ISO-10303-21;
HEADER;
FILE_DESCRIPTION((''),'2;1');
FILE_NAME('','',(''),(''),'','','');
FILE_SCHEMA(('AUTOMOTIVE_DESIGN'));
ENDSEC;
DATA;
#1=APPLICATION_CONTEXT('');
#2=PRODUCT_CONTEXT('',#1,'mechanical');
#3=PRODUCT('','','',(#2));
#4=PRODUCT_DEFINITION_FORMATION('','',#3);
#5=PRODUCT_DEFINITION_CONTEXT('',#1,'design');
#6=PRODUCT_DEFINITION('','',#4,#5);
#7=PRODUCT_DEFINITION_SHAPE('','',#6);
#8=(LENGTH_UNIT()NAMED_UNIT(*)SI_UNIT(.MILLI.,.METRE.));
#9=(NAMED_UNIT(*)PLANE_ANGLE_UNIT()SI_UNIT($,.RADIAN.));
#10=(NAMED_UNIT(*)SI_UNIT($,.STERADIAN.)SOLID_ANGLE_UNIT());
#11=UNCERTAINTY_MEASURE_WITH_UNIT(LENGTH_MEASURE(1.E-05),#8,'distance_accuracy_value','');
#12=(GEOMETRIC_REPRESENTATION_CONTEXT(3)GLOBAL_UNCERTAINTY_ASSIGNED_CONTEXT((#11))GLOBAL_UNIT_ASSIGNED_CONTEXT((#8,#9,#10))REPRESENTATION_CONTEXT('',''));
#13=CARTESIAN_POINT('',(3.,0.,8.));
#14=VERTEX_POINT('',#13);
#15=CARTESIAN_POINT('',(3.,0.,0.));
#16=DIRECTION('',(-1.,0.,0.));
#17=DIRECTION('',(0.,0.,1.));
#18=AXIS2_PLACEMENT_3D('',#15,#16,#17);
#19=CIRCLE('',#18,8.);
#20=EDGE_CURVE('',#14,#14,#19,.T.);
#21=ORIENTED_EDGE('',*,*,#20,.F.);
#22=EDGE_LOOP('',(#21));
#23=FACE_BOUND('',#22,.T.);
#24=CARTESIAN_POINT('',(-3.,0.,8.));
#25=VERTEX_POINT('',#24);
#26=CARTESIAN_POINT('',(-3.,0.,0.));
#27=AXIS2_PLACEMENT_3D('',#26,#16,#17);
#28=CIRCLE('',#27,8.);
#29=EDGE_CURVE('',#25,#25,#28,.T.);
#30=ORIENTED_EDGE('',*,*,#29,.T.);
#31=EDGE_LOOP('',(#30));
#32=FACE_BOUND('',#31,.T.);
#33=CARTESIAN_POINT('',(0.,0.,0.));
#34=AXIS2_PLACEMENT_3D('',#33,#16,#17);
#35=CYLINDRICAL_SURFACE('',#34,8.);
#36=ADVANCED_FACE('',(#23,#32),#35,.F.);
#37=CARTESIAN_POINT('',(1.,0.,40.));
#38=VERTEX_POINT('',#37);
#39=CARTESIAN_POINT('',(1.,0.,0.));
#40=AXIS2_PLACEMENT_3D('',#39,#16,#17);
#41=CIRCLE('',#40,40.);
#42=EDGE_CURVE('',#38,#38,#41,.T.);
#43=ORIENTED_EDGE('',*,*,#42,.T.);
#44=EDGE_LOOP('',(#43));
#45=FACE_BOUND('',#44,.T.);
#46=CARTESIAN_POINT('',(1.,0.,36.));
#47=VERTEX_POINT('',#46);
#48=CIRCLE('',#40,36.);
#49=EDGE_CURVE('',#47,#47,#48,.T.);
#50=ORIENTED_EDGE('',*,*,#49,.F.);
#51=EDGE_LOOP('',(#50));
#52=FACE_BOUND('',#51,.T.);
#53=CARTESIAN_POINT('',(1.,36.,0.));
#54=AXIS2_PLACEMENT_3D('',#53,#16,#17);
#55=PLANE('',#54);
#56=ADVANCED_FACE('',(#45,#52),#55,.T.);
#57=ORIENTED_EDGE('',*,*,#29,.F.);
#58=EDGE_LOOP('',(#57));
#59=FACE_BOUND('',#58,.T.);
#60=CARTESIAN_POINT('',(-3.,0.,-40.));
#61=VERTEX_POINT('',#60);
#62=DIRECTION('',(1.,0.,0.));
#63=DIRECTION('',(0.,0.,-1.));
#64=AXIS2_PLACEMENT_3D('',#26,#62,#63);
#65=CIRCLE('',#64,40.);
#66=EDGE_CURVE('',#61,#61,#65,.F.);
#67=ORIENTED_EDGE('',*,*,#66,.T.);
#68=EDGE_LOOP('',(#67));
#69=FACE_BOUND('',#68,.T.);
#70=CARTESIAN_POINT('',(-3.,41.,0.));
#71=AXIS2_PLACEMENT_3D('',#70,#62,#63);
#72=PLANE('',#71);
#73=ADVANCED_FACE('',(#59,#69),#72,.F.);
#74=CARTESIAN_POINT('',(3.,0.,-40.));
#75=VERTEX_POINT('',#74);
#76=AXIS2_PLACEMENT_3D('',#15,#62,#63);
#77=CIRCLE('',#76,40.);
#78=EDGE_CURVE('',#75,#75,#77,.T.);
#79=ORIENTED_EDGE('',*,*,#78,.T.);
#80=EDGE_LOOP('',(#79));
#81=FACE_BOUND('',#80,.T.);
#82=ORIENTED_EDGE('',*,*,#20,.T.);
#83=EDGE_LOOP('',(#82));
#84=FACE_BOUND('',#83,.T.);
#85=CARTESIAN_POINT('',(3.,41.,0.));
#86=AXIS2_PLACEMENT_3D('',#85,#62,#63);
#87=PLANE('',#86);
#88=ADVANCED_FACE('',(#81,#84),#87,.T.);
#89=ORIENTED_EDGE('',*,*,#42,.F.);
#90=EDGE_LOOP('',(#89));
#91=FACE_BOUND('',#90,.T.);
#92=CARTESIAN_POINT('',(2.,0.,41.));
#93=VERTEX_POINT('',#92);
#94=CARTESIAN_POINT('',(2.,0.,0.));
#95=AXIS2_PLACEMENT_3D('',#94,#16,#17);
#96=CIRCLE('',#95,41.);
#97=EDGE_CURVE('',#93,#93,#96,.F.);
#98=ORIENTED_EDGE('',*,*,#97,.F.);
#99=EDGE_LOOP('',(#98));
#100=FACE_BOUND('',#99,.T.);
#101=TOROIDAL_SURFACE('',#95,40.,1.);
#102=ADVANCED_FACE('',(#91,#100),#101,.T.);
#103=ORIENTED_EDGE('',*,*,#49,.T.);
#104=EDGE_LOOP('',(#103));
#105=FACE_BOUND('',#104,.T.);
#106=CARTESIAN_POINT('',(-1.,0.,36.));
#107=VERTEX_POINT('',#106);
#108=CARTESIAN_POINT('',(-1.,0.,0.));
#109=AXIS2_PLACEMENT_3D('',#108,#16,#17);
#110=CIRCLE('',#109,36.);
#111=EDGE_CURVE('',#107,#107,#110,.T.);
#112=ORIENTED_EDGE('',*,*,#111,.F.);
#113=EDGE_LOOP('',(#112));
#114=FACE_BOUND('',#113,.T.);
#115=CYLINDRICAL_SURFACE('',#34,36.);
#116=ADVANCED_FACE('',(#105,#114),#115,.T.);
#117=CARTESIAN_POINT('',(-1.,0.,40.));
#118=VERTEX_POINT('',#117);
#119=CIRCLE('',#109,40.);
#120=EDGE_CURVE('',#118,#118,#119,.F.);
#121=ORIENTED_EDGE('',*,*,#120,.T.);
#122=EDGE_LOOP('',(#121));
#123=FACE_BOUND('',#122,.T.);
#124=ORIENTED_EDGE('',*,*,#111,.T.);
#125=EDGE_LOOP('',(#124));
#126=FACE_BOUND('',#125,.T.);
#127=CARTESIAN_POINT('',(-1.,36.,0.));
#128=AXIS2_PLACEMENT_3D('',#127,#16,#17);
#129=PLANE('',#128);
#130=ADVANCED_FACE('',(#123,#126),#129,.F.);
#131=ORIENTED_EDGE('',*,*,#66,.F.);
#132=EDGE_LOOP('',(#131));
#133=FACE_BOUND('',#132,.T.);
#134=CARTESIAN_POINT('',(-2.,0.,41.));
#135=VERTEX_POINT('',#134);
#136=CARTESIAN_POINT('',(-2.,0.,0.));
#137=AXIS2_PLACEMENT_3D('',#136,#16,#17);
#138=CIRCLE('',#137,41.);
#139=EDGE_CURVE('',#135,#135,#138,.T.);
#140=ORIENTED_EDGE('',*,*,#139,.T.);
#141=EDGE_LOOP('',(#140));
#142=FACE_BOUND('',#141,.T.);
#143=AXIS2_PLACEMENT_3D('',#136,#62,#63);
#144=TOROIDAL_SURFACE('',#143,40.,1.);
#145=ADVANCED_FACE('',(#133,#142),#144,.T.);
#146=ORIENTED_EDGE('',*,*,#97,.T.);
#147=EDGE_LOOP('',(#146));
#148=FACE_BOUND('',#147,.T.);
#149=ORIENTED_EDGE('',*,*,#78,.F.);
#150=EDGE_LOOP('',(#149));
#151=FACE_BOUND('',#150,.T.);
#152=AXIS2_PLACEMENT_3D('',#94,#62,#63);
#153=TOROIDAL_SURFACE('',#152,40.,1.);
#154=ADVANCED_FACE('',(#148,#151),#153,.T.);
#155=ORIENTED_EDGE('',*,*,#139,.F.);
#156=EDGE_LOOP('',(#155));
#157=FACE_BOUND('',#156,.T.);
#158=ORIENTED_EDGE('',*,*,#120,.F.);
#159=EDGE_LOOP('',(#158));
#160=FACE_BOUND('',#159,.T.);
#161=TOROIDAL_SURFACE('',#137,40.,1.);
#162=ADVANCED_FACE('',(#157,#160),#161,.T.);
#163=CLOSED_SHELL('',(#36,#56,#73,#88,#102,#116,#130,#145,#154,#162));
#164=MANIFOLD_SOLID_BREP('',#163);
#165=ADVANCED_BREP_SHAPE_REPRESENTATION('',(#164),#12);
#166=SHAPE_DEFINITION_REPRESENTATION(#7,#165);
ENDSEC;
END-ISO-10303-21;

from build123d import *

# Parameters (mm, degrees)
CONG_1_R = 1


with BuildPart() as part:
    # Esquisse1 → Révolution2 (revolve)
    with BuildSketch(Plane.XY, mode=Mode.PRIVATE) as r_volution2_sk:
        Polygon((-1, 36), (1, 36), (1, 41), (3, 41), (3, 8), (-3, 8), (-3, 41), (-1, 41), align=None)
    revolve(r_volution2_sk.sketch.rotate(Axis((0, 0, 0), (1, 0, 0)), 90), axis=Axis((0, 0, 0), (1, 0, 0)))

    # Congé1
    cong_1_edges = [part.edges().sort_by_distance(p)[0] for p in [
        (-3, 0, -41),
        (-1, 0, -41),
        (1, 0, -41),
        (3, 0, -41),
    ]]
    fillet(cong_1_edges, radius=CONG_1_R - 0.0001)  # a hair under: the kernel refuses the full size


solid = part.part
